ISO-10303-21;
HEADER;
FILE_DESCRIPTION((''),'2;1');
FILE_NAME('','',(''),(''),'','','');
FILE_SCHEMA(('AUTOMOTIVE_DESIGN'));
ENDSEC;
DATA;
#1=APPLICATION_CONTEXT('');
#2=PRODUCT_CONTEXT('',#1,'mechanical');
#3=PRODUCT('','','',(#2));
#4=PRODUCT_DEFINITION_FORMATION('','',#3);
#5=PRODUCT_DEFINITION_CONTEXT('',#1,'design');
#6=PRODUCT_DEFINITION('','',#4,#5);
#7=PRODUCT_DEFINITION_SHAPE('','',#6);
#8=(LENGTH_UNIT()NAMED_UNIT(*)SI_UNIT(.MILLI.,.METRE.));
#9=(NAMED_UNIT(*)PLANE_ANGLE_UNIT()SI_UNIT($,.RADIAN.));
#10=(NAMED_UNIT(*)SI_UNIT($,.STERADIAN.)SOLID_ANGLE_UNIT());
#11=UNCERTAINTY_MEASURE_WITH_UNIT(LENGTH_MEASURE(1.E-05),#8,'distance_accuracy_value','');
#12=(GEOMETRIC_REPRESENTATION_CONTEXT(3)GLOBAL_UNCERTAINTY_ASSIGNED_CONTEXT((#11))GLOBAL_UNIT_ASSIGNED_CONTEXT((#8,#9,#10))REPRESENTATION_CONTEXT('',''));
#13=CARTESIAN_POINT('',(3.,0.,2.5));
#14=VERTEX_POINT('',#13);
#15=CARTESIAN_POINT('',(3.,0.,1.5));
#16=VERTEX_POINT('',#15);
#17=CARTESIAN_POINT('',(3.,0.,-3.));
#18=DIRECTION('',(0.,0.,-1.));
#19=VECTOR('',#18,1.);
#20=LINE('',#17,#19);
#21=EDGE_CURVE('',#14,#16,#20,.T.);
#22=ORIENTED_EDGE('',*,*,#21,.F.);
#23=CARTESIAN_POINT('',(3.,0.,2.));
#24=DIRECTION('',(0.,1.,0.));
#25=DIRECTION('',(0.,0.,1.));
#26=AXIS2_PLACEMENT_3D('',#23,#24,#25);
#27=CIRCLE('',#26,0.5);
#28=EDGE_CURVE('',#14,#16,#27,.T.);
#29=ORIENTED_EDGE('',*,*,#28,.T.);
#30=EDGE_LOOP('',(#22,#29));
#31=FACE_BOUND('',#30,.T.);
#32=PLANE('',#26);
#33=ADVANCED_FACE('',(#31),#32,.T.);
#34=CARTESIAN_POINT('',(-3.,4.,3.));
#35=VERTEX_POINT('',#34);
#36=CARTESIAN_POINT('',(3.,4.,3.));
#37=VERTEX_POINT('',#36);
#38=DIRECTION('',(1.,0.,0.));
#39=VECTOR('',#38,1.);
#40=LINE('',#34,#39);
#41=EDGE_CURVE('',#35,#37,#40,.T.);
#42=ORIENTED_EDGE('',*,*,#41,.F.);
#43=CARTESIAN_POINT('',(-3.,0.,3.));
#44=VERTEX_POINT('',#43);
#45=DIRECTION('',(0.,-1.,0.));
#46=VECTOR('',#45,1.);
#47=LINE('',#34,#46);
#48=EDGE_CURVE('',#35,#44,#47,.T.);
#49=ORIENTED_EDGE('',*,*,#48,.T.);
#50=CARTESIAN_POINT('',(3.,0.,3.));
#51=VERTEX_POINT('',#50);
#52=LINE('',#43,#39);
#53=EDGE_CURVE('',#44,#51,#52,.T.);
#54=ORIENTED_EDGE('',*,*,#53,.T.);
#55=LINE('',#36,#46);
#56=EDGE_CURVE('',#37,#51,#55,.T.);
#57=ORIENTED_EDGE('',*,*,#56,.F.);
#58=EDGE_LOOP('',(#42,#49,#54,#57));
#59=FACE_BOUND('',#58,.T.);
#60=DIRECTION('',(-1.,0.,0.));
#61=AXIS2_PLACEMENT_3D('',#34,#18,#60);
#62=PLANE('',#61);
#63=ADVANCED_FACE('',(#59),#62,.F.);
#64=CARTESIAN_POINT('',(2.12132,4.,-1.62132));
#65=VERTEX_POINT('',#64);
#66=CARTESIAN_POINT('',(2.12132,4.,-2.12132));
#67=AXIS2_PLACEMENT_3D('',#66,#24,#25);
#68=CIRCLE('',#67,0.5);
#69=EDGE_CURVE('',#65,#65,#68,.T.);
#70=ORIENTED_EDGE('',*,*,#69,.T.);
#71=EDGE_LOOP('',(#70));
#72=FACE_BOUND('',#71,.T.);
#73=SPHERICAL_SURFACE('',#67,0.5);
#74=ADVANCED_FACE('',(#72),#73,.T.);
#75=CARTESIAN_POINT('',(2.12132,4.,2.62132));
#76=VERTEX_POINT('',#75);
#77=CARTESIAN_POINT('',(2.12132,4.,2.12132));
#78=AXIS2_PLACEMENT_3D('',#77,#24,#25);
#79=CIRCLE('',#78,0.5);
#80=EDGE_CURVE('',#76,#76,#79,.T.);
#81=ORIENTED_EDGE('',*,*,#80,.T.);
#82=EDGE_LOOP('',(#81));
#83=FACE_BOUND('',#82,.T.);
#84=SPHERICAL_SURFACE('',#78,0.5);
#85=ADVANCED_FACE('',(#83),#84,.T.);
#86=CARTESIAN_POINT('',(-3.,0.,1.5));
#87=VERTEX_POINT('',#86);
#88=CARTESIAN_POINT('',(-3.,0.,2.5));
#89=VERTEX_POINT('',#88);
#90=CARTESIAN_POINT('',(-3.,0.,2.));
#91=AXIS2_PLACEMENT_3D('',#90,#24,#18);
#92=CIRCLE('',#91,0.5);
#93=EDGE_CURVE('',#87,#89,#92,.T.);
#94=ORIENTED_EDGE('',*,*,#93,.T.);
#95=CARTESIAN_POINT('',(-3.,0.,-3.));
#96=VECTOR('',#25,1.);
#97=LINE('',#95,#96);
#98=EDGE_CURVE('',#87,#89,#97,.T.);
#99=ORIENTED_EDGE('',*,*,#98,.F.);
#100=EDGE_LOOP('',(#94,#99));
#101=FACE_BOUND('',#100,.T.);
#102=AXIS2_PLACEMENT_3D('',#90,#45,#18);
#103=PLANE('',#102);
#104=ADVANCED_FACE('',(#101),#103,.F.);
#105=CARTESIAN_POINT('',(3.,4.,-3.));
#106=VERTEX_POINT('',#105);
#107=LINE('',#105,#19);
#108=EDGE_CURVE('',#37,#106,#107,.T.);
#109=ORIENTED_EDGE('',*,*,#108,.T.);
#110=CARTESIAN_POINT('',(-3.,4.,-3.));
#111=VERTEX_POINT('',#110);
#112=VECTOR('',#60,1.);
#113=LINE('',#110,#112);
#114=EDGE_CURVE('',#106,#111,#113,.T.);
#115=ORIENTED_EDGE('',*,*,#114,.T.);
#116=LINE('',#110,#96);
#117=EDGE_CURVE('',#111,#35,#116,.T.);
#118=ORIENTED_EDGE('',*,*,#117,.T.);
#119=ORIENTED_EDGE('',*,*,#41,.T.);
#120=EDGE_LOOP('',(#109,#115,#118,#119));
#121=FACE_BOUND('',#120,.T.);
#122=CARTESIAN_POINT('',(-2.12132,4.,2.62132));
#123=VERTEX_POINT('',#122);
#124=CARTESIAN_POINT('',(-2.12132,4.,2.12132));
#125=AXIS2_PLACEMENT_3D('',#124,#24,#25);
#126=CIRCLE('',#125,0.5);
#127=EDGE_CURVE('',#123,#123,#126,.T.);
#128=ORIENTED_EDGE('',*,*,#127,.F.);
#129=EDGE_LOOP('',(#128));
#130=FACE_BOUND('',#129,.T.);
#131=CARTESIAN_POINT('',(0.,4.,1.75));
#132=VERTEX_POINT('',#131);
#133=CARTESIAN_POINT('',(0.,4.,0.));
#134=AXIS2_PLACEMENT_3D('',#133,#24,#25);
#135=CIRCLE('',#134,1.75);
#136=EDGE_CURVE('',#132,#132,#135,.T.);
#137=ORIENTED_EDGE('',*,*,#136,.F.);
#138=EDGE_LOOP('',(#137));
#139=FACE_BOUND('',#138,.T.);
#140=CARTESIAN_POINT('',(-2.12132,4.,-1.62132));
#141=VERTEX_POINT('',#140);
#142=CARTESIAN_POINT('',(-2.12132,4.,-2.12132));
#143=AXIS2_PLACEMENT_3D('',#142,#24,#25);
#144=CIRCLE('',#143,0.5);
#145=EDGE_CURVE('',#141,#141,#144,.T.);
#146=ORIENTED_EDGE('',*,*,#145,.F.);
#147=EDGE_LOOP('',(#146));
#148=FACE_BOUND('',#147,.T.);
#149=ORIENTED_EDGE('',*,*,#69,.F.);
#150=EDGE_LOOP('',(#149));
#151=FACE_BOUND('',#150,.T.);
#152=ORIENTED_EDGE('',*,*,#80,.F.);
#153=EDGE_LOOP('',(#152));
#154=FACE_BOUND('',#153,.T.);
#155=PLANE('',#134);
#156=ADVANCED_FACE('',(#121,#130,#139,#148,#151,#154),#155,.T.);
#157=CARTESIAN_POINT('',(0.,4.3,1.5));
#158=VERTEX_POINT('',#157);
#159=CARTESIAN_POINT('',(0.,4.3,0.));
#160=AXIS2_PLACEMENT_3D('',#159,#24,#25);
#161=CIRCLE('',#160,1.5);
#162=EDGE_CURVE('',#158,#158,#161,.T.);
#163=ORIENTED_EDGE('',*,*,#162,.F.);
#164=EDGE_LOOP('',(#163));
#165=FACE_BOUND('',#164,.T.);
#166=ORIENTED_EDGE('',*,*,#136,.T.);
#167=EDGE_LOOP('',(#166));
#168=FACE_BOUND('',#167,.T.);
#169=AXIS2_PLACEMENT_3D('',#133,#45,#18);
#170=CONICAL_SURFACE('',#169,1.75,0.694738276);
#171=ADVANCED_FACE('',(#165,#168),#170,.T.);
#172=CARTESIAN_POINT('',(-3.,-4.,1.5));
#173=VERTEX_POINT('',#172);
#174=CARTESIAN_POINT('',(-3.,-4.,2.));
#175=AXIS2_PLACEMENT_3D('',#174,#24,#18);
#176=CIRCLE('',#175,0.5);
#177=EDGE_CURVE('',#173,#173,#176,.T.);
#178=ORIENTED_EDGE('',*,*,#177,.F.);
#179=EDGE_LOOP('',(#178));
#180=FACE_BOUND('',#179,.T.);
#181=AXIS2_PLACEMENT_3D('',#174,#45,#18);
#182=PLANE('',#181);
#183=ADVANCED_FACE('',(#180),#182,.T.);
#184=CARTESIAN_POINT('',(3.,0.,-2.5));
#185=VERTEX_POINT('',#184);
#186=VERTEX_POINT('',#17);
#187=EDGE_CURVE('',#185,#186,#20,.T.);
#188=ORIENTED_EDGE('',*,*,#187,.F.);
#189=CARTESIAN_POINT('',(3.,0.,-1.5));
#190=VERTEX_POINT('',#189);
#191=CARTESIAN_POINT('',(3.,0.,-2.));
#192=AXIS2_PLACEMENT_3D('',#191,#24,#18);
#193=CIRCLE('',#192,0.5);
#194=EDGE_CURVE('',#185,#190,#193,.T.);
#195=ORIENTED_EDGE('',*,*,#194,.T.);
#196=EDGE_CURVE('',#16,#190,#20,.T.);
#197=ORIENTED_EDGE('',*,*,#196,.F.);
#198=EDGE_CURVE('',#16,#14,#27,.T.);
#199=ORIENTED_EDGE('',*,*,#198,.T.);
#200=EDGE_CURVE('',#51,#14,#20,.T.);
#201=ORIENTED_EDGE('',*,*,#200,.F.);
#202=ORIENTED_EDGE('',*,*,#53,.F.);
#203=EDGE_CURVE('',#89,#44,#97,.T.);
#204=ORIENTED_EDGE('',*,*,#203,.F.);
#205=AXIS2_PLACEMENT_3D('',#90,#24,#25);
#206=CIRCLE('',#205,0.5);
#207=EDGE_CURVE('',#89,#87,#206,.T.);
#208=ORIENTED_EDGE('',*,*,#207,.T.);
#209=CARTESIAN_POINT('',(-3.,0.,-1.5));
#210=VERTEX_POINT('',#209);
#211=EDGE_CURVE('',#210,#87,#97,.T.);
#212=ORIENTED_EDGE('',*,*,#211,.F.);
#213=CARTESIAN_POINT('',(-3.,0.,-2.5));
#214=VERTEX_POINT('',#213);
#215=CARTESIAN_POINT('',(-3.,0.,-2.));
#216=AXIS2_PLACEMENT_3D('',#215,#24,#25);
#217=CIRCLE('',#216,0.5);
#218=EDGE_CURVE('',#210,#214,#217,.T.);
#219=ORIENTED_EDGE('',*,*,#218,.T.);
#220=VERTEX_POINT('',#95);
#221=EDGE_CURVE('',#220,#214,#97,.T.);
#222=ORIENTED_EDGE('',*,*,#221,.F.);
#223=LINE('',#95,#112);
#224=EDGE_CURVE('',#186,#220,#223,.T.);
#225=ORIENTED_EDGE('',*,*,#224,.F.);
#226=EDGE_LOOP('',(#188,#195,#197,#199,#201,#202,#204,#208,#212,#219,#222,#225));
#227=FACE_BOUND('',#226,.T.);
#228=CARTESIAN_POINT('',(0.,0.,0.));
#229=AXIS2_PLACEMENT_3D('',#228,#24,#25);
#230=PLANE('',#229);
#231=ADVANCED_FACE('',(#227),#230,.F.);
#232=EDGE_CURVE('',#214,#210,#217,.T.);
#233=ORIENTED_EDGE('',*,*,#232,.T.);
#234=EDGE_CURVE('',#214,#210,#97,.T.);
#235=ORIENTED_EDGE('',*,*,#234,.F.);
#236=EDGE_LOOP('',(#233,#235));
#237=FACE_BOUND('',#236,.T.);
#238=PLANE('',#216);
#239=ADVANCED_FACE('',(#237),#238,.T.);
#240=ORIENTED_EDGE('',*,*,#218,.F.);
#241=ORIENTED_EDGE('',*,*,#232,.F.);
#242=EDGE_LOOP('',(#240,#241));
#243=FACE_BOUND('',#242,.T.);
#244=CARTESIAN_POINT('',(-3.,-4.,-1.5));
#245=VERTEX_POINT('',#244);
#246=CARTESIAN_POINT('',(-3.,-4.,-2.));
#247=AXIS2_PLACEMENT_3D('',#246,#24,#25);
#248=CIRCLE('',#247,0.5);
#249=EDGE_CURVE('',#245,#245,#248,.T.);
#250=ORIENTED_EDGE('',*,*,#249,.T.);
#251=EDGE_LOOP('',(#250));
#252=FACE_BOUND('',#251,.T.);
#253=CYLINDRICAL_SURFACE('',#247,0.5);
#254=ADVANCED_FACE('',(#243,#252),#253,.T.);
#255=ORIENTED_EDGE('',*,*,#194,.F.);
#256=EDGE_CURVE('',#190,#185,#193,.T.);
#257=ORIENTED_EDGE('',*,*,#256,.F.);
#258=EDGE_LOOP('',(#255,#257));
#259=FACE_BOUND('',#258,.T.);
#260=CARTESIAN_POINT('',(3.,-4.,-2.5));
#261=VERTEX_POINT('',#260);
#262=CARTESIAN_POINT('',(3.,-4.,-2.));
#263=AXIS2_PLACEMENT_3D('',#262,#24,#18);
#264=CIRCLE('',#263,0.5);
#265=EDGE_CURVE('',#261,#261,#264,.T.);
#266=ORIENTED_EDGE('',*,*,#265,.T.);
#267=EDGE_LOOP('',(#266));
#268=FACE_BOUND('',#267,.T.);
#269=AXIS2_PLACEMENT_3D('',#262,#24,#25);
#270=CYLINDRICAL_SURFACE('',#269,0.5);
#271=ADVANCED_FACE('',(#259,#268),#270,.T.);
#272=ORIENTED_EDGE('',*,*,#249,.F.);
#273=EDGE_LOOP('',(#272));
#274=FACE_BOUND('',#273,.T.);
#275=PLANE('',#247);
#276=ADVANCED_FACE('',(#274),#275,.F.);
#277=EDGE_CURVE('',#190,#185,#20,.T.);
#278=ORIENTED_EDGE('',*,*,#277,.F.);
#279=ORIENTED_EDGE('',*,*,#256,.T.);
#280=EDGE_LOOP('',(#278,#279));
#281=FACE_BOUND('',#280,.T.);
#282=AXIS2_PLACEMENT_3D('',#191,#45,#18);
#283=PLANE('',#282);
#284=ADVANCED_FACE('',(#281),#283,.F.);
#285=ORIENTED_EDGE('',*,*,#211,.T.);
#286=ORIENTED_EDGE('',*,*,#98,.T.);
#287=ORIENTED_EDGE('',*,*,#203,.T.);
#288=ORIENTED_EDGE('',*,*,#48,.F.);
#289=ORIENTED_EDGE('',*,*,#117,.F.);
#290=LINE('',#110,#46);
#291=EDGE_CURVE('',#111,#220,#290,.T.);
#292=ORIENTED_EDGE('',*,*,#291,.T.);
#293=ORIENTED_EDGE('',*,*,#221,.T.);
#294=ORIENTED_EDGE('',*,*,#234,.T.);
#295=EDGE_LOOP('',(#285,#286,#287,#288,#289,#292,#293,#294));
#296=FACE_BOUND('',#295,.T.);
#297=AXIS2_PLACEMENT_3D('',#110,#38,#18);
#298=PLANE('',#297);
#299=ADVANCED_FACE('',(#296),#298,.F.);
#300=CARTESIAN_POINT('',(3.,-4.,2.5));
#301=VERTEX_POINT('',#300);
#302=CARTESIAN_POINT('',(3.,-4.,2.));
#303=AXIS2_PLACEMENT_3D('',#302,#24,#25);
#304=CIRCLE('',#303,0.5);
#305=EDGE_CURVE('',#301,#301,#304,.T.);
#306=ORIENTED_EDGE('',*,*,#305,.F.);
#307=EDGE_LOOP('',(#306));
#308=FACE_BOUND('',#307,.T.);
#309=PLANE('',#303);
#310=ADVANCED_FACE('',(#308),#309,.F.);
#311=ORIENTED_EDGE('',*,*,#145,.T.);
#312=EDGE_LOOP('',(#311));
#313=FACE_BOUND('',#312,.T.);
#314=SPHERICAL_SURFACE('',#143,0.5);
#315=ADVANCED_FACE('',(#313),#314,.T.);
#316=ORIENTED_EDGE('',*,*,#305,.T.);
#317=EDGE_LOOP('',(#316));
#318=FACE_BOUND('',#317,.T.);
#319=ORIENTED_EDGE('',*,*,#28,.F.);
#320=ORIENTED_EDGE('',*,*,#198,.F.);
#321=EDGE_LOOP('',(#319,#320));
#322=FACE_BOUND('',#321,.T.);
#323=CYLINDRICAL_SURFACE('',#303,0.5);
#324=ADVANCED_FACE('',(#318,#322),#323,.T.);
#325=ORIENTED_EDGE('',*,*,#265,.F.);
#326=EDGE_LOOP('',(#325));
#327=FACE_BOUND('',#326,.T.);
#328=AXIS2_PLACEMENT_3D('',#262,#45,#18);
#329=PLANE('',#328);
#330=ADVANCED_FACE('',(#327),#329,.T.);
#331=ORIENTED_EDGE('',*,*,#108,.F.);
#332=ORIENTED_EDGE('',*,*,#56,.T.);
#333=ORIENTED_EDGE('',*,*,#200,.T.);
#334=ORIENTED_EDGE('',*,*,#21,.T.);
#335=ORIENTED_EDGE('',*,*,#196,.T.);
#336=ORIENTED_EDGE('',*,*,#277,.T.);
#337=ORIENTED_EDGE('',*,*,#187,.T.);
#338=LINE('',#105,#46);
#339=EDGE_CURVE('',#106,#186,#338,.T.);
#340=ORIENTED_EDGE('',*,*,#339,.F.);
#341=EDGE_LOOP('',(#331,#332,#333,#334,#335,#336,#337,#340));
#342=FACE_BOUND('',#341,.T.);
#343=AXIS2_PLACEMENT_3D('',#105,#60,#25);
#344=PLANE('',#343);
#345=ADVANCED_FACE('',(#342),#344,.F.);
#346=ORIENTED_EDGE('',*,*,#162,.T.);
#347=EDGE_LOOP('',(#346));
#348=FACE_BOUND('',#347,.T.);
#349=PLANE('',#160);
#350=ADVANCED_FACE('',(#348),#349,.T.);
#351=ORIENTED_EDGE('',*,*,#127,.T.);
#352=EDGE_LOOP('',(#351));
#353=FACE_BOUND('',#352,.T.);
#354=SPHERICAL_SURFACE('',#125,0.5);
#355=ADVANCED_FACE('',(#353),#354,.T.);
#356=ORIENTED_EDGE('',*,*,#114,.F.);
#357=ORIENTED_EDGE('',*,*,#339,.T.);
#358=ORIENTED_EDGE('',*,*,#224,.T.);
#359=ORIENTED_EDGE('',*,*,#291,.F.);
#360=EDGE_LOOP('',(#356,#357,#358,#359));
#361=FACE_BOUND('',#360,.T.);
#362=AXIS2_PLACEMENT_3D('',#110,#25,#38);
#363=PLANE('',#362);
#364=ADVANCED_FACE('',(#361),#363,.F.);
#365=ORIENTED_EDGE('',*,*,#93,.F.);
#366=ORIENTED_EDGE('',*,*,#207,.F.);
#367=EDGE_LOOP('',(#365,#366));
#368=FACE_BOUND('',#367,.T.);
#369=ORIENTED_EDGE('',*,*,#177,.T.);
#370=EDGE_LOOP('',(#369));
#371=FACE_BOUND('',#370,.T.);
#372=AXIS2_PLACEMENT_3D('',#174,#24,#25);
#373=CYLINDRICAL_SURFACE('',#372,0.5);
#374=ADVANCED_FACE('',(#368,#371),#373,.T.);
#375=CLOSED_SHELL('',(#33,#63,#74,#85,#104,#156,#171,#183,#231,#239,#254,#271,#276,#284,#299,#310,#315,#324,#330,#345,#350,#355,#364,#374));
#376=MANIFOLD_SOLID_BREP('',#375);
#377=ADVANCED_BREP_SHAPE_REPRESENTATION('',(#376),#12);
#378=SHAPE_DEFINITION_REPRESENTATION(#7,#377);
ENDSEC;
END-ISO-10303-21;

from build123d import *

# Parameters (mm, degrees)
SKETCH1_W           = 6
SKETCH1_H           = 6
BOSS_EXTRUDE1_DEPTH = 4
BOSS_EXTRUDE2_START = -4
SKETCH2_R           = 1.75
BOSS_EXTRUDE2_DEPTH = 4.3
SKETCH4_R           = 0.5
BOSS_EXTRUDE3_DEPTH = 0.5
FILLET1_R           = 0.5
SKETCH5_R           = 0.5
BOSS_EXTRUDE4_DEPTH = 4


with BuildPart() as part:
    # Sketch1 → Boss-Extrude1 (new body)
    with BuildSketch(Plane(origin=(0, 0, 0), x_dir=(1, 0, 0), z_dir=(0, 1, 0))):
        Rectangle(SKETCH1_W, SKETCH1_H)
    extrude(amount=BOSS_EXTRUDE1_DEPTH)

    # Sketch2 → Boss-Extrude2 (add)
    with BuildSketch(Plane(origin=(0, 4, 0), x_dir=(1, 0, 0), z_dir=(0, 1, 0)).offset(BOSS_EXTRUDE2_START)):
        with Locations(Location((0, 0, 0), (0, 0, 90))):
            Circle(SKETCH2_R)
    extrude(amount=BOSS_EXTRUDE2_DEPTH)

    # Sketch3 → Cut-Revolve1 (revolve, cut)
    with BuildSketch(Plane(origin=(0, 0, 0), x_dir=(0, 0, -1), z_dir=(1, 0, 0))):
        Polygon((-1.75, 4.3), (-1.75, 4), (-1.5, 4.3), align=None)
    revolve(axis=Axis((0, 8.374446569, 0), (0, -1, 0)), mode=Mode.SUBTRACT)

    # Sketch4 → Boss-Extrude3 (add)
    with BuildSketch(Plane(origin=(0, 4, 0), x_dir=(1, 0, 0), z_dir=(0, 1, 0))):
        with Locations(Location((-2.121320344, 2.121320344, 0), (0, 0, 270))):
            Circle(SKETCH4_R)
        with Locations(Location((2.121320344, 2.121320344, 0), (0, 0, 270))):
            Circle(SKETCH4_R)
        with Locations(Location((2.121320344, -2.121320344, 0), (0, 0, 270))):
            Circle(SKETCH4_R)
        with Locations(Location((-2.121320344, -2.121320344, 0), (0, 0, 270))):
            Circle(SKETCH4_R)
    extrude(amount=BOSS_EXTRUDE3_DEPTH)

    # Fillet1
    fillet1_edges = [part.edges().sort_by_distance(p)[0] for p in [
        (-2.121320344, 4.5, -2.621320344),
        (2.121320344, 4.5, -2.621320344),
        (2.121320344, 4.5, 1.621320344),
        (-2.121320344, 4.5, 1.621320344),
    ]]
    fillet(fillet1_edges, radius=FILLET1_R - 0.0001)  # a hair under: the kernel refuses the full size

    # Sketch5 → Boss-Extrude4 (add)
    with BuildSketch(Plane(origin=(0, 0, 0), x_dir=(1, 0, 0), z_dir=(0, 1, 0))):
        with Locations(Location((3, -2, 0), (0, 0, 270))):
            Circle(SKETCH5_R)
        with Locations(Location((3, 2, 0), (0, 0, 90))):
            Circle(SKETCH5_R)
        with Locations(Location((-3, 2, 0), (0, 0, 270))):
            Circle(SKETCH5_R)
        with Locations(Location((-3, -2, 0), (0, 0, 90))):
            Circle(SKETCH5_R)
    extrude(amount=-BOSS_EXTRUDE4_DEPTH)


solid = part.part
